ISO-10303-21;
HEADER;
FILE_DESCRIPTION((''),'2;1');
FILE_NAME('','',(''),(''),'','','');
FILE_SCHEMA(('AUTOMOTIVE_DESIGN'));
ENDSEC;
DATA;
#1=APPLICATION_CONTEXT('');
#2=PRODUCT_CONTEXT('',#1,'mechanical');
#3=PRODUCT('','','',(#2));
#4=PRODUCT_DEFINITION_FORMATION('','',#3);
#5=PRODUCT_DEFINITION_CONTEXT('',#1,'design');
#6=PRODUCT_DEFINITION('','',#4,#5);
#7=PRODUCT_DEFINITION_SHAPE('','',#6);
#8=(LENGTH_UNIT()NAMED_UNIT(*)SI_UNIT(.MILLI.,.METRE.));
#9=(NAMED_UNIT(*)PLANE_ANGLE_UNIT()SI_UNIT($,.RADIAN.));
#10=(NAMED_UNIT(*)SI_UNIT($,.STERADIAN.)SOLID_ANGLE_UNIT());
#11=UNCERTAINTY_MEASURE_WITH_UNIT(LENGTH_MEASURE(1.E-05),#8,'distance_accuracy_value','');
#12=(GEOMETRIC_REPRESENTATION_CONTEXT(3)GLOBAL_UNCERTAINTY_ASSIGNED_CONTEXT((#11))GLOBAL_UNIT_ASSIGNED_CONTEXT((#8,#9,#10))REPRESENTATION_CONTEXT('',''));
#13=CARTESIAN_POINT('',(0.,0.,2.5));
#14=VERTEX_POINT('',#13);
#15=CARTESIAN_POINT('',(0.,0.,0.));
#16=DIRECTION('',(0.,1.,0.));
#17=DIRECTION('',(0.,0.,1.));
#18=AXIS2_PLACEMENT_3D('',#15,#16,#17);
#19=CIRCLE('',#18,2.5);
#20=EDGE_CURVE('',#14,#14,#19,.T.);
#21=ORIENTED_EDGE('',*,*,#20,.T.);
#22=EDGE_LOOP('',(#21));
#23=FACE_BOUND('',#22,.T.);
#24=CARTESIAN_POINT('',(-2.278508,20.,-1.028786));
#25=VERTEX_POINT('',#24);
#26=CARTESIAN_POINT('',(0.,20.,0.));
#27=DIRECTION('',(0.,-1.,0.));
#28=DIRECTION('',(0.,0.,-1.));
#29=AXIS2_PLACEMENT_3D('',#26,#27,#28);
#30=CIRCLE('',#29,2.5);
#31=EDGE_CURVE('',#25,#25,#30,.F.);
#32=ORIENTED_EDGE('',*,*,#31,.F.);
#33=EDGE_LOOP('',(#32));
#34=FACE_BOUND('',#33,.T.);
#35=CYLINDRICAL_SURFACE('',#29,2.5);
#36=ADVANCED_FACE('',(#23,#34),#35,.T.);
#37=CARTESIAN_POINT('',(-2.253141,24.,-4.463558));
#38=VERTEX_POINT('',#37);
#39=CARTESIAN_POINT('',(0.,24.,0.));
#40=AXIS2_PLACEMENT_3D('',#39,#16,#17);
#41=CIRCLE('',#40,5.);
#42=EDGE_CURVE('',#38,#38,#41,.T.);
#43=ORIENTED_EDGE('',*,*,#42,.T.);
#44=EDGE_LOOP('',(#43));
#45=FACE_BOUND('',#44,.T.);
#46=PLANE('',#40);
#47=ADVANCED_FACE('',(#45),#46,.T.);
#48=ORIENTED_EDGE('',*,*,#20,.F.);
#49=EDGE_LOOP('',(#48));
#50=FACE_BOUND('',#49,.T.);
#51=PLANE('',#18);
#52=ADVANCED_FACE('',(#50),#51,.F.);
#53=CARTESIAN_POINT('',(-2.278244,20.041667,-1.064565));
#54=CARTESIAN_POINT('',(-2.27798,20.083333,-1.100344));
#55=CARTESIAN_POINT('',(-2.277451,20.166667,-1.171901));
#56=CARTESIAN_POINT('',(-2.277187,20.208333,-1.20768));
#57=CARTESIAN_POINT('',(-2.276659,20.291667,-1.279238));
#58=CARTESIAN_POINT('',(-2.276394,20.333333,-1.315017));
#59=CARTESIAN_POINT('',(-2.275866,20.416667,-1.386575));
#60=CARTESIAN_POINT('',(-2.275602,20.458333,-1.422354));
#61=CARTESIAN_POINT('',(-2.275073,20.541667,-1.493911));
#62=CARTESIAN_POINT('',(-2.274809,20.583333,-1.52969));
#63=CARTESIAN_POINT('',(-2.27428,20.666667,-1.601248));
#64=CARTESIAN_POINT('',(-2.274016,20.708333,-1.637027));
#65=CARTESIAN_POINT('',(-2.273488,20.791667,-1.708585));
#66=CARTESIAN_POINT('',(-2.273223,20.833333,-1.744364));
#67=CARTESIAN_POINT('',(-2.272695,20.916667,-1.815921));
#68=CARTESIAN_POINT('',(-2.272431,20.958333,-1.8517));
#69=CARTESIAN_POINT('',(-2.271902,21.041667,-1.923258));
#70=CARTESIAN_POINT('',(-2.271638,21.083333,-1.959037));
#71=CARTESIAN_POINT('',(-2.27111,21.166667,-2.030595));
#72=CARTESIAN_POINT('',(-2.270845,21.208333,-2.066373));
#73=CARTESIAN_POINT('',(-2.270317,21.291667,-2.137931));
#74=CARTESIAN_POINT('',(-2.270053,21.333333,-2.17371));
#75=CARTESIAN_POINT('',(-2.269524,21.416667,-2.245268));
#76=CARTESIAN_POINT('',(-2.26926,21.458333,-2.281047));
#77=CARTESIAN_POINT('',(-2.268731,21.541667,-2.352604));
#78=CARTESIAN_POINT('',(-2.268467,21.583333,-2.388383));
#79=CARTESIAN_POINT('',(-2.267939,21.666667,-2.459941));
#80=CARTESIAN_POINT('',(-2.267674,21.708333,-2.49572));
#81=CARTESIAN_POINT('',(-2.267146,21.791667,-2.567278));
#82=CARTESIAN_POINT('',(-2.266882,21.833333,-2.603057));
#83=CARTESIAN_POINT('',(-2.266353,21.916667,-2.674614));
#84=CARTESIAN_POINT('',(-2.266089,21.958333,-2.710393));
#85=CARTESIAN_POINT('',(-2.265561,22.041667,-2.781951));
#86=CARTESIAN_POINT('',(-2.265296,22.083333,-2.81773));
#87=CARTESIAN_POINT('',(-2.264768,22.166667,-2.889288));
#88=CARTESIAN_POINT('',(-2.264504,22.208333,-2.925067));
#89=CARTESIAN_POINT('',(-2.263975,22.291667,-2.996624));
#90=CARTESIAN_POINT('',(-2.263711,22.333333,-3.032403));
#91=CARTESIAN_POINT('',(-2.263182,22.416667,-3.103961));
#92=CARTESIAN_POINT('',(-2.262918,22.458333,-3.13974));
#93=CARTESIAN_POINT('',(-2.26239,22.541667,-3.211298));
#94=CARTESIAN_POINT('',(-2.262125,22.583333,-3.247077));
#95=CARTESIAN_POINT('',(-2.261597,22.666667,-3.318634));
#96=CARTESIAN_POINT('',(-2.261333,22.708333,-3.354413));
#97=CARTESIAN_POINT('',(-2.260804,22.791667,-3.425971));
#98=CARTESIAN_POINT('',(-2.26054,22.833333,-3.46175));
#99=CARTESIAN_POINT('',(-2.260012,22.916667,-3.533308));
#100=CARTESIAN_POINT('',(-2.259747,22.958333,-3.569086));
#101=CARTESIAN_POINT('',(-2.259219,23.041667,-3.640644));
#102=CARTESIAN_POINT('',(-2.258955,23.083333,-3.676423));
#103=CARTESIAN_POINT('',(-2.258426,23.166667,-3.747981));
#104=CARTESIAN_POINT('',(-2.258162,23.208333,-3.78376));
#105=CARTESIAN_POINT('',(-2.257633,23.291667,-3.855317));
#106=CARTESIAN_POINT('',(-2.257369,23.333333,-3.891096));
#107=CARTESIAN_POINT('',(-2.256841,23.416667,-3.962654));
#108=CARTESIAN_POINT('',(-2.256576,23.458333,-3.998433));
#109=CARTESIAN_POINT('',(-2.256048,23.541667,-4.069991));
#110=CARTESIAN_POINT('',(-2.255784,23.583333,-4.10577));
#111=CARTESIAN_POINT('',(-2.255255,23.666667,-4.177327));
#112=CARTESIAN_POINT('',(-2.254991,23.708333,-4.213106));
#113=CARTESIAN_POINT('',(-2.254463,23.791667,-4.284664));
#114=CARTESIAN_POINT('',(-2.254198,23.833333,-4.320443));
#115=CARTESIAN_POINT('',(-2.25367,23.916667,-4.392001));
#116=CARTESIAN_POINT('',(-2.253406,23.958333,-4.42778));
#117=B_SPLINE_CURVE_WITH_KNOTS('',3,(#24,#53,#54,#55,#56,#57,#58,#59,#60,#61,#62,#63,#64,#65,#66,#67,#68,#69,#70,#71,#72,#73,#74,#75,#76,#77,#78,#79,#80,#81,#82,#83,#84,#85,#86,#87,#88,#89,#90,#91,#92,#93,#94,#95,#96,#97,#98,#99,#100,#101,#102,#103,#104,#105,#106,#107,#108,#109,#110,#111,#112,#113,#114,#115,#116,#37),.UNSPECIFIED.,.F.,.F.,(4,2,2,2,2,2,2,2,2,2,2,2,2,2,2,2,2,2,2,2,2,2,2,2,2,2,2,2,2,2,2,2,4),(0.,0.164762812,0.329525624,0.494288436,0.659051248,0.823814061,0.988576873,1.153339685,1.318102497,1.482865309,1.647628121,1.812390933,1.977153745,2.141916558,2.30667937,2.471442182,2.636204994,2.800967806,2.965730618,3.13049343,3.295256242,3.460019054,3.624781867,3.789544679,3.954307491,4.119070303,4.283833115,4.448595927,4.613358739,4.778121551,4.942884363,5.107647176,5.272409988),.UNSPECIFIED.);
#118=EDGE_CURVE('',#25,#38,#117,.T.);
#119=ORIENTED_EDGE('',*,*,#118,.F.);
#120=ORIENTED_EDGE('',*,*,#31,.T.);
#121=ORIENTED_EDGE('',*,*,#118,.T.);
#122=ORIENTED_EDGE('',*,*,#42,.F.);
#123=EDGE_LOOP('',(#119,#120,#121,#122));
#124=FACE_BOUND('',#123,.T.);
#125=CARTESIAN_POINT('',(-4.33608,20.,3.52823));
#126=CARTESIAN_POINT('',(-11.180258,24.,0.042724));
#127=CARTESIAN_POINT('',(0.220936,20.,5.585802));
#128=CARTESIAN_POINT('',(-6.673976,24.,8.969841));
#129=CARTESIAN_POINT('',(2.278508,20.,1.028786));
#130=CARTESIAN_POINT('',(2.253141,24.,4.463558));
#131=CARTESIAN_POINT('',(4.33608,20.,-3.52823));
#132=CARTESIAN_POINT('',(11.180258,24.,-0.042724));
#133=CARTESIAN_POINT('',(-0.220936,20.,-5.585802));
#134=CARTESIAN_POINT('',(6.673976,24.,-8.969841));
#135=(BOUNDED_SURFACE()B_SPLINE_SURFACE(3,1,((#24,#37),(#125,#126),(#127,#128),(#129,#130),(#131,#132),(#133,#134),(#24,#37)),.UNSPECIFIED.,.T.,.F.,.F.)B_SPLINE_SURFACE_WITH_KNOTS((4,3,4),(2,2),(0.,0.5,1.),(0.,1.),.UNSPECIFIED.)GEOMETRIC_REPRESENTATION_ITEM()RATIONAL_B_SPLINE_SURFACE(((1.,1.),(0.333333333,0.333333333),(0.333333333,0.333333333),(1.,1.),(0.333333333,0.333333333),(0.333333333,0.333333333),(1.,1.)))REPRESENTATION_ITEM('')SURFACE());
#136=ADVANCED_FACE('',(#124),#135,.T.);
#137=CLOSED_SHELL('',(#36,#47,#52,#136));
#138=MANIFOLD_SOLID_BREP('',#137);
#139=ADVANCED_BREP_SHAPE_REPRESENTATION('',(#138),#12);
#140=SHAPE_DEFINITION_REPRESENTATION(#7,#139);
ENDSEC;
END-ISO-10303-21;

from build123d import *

# Parameters (mm, degrees)
SKETCH1_R           = 2.5
BOSS_EXTRUDE1_DEPTH = 20


with BuildPart() as part:
    # Sketch1 → Boss-Extrude1 (new body)
    with BuildSketch(Plane(origin=(0, 0, 0), x_dir=(1, 0, 0), z_dir=(0, 1, 0))):
        with Locations(Location((0, 0, 0), (0, 0, 270))):
            Circle(SKETCH1_R)
    extrude(amount=BOSS_EXTRUDE1_DEPTH)

    # Loft1: read off the stored shape, not the designer's step
    # Loft1: loft between two sections, ruled curve by curve
    loft1_from = [
        Edge.make_bspline([(-2.278508192, 20, -1.028785897), (-4.336079985, 20, 3.528230487), (0.220936399, 20, 5.58580228), (2.278508192, 20, 1.028785897), (4.336079985, 20, -3.528230487), (-0.220936399, 20, -5.58580228), (-2.278508192, 20, -1.028785897)], [0, 0, 0, 0, 0.5, 0.5, 0.5, 1, 1, 1, 1], 3, [1, 0.333333333, 0.333333333, 1, 0.333333333, 0.333333333, 1]),
    ]
    loft1_to = [
        Edge.make_bspline([(-2.253141331, 24.000000128, -4.463558462), (-11.180258255, 24.000000128, 0.042724199), (-6.673975593, 24.000000128, 8.969841123), (2.253141331, 24.000000128, 4.463558462), (11.180258255, 24.000000128, -0.042724199), (6.673975593, 24.000000128, -8.969841123), (-2.253141331, 24.000000128, -4.463558462)], [0, 0, 0, 0, 0.5, 0.5, 0.5, 1, 1, 1, 1], 3, [1, 0.333333333, 0.333333333, 1, 0.333333333, 0.333333333, 1]),
    ]
    loft1 = Solid(Shell([*[Face.make_surface_from_curves(loft1_from[k], loft1_to[k]) for k in range(1)], Face(Wire(loft1_from)), Face(Wire(loft1_to))]))
    add(loft1)


solid = part.part
